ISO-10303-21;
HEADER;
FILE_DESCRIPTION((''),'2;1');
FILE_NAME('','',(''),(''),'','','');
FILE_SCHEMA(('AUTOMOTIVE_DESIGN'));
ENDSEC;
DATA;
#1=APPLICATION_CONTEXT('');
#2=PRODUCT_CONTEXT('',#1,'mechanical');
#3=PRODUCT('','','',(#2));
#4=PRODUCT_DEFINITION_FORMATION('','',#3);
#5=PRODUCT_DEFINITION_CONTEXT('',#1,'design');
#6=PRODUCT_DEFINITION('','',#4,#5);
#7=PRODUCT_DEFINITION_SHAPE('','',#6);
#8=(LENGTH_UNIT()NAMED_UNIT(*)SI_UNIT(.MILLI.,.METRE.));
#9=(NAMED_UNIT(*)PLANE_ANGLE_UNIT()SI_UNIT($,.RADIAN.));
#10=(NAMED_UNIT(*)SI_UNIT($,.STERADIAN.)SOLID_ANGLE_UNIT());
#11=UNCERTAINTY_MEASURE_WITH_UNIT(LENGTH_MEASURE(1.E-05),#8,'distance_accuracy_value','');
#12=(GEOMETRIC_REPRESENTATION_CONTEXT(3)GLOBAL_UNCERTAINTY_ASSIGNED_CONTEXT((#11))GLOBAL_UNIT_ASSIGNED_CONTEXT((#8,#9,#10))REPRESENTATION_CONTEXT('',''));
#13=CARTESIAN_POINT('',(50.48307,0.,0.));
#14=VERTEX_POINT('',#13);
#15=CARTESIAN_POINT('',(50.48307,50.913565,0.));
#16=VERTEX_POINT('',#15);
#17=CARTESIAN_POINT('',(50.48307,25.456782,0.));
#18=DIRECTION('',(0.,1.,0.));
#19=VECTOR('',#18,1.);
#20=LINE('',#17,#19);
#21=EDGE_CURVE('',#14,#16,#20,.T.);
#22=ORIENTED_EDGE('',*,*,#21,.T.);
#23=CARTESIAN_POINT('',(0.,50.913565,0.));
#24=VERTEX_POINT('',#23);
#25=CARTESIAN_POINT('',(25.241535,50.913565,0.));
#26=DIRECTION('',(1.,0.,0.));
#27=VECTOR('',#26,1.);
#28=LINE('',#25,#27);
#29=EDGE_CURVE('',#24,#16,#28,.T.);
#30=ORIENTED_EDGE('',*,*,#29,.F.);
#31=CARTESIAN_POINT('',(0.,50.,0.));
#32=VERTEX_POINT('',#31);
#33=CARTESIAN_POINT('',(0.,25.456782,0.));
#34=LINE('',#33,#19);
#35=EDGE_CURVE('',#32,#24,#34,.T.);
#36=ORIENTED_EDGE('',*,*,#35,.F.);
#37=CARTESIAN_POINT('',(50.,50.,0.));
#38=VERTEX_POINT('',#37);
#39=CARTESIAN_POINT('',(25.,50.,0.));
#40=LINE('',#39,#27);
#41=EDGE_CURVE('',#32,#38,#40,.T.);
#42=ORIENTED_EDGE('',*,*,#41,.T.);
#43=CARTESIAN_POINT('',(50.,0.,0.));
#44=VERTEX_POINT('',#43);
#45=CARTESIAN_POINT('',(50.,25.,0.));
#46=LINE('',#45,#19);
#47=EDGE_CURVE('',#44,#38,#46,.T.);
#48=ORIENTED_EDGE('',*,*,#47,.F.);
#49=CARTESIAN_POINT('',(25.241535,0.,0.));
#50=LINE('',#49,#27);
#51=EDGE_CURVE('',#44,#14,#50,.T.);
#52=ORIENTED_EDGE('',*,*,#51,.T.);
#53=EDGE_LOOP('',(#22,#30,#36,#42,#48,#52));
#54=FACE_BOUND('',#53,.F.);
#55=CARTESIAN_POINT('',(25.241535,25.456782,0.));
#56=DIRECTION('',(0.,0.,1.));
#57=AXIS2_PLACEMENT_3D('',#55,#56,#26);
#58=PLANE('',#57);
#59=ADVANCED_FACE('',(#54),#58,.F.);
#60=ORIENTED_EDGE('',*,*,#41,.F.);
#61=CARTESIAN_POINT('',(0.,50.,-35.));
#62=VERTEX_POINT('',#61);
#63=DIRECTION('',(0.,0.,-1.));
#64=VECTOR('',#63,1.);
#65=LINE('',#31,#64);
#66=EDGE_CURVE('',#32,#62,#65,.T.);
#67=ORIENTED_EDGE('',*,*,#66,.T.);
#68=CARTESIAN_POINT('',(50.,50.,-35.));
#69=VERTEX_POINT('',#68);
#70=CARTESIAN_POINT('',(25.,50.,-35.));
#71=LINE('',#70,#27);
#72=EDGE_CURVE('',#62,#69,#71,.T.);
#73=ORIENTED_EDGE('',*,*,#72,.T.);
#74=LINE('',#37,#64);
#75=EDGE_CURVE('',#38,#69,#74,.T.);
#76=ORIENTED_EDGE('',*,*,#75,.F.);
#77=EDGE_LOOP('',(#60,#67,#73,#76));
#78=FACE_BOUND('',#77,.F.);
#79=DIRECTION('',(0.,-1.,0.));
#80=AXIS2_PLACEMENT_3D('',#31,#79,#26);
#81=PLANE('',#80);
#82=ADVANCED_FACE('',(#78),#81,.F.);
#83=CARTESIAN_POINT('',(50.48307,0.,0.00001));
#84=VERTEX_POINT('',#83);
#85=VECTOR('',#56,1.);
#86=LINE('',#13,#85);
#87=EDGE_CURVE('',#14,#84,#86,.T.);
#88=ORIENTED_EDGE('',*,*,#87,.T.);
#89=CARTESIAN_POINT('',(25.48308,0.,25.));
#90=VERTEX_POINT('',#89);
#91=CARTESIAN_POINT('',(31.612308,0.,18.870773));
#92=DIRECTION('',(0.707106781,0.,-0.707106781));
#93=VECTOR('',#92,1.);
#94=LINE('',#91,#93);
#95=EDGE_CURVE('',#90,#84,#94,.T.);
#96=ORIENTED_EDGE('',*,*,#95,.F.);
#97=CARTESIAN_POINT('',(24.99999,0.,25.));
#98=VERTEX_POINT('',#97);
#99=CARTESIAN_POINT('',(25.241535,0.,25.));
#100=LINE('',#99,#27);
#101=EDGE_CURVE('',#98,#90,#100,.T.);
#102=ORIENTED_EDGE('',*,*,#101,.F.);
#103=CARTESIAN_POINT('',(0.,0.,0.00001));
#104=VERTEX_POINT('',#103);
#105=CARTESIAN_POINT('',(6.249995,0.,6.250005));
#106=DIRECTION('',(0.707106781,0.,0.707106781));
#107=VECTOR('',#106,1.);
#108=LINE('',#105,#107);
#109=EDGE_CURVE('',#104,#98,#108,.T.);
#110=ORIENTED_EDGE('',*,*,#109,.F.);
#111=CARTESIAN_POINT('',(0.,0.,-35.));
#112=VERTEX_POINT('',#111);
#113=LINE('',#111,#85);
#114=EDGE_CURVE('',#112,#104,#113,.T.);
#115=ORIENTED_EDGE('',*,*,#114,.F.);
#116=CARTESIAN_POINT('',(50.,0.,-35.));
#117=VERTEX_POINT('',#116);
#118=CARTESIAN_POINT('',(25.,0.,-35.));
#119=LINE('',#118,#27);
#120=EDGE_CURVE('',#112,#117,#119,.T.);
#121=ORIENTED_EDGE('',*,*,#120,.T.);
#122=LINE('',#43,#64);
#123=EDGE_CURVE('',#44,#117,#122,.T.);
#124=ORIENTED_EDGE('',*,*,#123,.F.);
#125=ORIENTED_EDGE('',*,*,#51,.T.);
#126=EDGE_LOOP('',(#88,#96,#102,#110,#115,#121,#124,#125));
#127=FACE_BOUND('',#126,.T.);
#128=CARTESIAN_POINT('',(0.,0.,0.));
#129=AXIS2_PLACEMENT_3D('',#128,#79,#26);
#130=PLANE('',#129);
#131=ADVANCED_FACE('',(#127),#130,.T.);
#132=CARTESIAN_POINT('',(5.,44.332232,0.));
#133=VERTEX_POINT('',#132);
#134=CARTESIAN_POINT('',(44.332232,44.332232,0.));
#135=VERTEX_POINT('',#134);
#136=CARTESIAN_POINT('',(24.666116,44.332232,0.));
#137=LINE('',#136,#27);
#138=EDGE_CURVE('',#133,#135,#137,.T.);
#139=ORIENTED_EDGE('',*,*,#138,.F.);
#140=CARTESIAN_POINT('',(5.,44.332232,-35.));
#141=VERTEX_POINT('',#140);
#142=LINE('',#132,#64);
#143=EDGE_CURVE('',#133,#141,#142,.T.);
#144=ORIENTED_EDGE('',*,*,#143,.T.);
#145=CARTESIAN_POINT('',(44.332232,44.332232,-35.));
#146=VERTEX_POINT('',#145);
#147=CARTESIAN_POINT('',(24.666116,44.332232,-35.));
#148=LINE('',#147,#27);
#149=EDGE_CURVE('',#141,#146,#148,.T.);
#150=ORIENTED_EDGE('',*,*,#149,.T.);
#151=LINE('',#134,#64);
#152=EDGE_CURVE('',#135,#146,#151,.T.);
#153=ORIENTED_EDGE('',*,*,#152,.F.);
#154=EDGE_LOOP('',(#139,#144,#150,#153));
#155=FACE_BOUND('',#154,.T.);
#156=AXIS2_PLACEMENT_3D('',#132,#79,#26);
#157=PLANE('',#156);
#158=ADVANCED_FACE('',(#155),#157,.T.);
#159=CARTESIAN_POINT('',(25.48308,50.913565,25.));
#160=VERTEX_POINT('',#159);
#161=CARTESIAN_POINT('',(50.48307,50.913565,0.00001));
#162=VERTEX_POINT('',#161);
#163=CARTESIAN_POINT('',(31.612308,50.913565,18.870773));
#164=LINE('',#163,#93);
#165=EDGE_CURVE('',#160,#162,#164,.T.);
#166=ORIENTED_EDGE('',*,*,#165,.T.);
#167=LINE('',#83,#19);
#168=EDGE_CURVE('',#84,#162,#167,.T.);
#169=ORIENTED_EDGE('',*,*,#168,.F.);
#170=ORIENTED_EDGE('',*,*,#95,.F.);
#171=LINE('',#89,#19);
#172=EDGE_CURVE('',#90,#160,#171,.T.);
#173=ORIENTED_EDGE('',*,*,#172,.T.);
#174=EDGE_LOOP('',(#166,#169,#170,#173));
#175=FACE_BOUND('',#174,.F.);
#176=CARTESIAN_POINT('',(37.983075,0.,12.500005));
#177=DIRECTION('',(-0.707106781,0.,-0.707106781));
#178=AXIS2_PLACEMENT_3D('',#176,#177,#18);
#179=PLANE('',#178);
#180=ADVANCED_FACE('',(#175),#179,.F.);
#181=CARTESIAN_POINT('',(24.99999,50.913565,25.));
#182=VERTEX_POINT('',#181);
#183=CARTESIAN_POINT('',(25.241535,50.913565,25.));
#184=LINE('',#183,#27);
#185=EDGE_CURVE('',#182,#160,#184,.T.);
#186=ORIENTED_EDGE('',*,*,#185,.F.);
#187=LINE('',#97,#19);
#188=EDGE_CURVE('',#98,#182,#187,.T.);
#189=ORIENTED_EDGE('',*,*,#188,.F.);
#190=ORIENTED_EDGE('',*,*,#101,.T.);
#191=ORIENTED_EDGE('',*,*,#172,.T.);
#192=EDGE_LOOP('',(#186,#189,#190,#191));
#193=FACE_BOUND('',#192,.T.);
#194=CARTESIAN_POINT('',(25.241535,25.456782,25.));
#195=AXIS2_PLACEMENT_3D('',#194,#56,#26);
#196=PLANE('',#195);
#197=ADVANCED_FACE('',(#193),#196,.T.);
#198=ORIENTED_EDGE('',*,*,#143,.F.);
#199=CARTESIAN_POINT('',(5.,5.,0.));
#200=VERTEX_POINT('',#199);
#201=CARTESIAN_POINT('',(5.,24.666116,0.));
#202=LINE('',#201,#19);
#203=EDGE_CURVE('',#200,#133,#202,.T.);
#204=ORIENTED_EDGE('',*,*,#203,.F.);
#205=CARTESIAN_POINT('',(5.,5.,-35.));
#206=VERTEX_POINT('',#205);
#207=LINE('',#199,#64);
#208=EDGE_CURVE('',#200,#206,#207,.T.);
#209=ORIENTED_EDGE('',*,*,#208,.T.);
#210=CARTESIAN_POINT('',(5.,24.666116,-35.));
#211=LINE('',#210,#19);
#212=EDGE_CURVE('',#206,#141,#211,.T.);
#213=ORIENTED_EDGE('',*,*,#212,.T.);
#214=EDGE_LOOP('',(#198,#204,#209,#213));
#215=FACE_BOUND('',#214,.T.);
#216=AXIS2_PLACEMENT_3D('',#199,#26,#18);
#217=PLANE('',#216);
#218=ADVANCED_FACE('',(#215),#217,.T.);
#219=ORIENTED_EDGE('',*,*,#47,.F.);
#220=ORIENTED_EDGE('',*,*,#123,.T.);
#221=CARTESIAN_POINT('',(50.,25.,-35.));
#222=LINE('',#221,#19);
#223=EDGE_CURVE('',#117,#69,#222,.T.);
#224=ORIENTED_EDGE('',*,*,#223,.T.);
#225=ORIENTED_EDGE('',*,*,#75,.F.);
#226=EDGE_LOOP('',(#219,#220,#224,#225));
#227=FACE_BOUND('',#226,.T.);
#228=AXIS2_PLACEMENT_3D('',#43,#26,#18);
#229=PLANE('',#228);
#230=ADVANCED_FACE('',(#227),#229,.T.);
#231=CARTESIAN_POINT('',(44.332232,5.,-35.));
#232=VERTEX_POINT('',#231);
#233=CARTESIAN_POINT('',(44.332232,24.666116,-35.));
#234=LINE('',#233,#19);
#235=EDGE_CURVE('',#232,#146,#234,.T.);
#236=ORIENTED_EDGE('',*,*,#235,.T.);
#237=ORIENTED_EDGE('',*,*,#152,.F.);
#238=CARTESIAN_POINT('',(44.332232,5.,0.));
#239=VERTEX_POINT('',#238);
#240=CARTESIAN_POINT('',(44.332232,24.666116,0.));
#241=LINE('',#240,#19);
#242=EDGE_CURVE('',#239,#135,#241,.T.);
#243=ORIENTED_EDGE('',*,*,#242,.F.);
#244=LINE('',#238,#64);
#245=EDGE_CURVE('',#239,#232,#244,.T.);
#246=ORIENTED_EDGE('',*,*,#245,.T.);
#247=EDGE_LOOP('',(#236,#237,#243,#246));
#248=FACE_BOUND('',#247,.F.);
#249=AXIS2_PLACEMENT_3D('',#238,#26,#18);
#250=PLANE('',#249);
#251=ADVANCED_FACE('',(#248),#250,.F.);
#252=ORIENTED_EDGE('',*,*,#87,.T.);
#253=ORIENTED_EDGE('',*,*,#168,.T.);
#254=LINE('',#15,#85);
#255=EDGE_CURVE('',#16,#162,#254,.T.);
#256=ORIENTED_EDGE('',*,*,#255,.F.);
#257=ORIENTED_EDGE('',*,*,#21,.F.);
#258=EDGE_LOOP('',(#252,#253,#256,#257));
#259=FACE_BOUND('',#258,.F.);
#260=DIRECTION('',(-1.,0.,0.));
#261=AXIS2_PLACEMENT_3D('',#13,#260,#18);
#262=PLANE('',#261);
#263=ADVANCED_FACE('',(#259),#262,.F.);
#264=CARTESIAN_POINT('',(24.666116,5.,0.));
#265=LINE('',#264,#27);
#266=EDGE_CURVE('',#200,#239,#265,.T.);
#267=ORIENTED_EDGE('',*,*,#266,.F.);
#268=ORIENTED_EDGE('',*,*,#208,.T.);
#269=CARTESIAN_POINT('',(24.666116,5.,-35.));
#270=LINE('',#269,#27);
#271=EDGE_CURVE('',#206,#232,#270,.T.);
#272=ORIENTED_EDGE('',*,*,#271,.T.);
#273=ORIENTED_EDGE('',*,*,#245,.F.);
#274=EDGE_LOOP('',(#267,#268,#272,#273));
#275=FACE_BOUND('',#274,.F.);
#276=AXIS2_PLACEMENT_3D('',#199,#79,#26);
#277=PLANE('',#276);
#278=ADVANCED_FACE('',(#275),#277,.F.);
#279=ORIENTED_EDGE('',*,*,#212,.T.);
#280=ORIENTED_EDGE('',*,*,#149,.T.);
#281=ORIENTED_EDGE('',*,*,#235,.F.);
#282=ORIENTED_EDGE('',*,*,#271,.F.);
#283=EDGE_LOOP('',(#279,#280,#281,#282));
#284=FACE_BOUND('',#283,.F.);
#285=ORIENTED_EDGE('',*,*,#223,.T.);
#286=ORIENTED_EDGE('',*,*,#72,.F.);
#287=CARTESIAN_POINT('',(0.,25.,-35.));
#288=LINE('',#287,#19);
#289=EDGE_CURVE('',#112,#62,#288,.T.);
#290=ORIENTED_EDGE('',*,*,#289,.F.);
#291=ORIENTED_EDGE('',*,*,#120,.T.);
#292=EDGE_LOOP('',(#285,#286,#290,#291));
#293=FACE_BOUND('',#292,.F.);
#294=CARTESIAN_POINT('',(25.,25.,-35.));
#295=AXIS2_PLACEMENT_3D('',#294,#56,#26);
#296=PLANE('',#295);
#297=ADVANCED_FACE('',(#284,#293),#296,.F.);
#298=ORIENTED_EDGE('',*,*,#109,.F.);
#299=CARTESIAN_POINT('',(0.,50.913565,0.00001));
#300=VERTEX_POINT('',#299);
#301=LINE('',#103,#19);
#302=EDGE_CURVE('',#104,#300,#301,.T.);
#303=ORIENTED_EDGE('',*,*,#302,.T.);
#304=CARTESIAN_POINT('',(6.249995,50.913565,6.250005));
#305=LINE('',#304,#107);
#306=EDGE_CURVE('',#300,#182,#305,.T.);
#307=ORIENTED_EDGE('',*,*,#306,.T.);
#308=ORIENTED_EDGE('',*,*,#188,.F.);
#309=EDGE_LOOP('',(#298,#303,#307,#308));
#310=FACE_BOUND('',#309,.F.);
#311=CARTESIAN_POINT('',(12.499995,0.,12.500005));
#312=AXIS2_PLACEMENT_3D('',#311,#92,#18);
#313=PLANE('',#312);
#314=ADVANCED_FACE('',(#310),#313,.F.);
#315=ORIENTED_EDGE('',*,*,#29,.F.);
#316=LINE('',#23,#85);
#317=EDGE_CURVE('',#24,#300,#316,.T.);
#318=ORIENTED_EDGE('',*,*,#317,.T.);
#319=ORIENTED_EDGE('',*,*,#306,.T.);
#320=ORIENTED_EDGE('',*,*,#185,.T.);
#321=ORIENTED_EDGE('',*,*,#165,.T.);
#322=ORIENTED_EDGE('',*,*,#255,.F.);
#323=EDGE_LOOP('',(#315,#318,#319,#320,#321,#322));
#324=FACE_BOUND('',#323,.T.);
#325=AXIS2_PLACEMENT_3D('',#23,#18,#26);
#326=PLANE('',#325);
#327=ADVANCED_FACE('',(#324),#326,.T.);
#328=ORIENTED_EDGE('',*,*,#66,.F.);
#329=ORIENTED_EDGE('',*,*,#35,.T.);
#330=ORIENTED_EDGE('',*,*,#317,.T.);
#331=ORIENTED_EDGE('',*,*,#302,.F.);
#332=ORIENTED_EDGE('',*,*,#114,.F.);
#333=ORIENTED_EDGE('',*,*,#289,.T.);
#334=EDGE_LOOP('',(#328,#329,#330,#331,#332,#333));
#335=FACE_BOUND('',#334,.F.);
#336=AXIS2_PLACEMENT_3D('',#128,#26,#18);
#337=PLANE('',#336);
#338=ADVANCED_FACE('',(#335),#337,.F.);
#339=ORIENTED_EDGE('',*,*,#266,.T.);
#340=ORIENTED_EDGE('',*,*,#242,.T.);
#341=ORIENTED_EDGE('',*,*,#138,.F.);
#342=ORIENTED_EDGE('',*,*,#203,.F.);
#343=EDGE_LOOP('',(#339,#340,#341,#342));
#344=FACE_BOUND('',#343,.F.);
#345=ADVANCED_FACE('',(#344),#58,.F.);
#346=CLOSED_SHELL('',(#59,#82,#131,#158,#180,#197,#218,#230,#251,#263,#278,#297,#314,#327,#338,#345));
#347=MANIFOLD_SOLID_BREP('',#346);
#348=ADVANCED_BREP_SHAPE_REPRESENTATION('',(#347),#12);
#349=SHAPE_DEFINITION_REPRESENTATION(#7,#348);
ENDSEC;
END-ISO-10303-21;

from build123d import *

# Parameters (mm, degrees)
F1_W     = 50.4830703139
F1_H     = 50.9135648608
F2_DEPTH = 25
F0_W     = 50
F0_H     = 50
F0_W_2   = 39.3322317418
F0_H_2   = 39.3322317418
F3_DEPTH = 35
F4_SIZE2 = 24.99999
F4_SIZE  = 24.99999


# Not quite as in the source:
# - a fillet or chamfer is up to 0.001 mm smaller than in the source, because OpenCascade refuses the exact size


with BuildPart() as f2:
    # F1 (on Top) → F2 (new body)
    with BuildSketch(Plane.XY):
        with Locations((25.241535157, 25.4567824304)):
            Rectangle(F1_W, F1_H)
    extrude(amount=F2_DEPTH)

    # F0 (on Top) → F3 (join)
    with BuildSketch(Plane.XY):
        with Locations((25, 25)):
            Rectangle(F0_W, F0_H)
        with Locations((24.6661158709, 24.6661158709)):
            Rectangle(F0_W_2, F0_H_2, mode=Mode.SUBTRACT)
    extrude(amount=-F3_DEPTH)

    # F4 (size 25 and 25 in the source; OpenCascade refuses exactly that, so slightly less here)
    f4_edges = [f2.edges().sort_by_distance(p)[0] for p in [
        (50.48307, 25.456782, 25),
        (0, 25.456782, 25),
    ]]
    chamfer(f4_edges, length=F4_SIZE, length2=F4_SIZE2)


solid = f2.part
